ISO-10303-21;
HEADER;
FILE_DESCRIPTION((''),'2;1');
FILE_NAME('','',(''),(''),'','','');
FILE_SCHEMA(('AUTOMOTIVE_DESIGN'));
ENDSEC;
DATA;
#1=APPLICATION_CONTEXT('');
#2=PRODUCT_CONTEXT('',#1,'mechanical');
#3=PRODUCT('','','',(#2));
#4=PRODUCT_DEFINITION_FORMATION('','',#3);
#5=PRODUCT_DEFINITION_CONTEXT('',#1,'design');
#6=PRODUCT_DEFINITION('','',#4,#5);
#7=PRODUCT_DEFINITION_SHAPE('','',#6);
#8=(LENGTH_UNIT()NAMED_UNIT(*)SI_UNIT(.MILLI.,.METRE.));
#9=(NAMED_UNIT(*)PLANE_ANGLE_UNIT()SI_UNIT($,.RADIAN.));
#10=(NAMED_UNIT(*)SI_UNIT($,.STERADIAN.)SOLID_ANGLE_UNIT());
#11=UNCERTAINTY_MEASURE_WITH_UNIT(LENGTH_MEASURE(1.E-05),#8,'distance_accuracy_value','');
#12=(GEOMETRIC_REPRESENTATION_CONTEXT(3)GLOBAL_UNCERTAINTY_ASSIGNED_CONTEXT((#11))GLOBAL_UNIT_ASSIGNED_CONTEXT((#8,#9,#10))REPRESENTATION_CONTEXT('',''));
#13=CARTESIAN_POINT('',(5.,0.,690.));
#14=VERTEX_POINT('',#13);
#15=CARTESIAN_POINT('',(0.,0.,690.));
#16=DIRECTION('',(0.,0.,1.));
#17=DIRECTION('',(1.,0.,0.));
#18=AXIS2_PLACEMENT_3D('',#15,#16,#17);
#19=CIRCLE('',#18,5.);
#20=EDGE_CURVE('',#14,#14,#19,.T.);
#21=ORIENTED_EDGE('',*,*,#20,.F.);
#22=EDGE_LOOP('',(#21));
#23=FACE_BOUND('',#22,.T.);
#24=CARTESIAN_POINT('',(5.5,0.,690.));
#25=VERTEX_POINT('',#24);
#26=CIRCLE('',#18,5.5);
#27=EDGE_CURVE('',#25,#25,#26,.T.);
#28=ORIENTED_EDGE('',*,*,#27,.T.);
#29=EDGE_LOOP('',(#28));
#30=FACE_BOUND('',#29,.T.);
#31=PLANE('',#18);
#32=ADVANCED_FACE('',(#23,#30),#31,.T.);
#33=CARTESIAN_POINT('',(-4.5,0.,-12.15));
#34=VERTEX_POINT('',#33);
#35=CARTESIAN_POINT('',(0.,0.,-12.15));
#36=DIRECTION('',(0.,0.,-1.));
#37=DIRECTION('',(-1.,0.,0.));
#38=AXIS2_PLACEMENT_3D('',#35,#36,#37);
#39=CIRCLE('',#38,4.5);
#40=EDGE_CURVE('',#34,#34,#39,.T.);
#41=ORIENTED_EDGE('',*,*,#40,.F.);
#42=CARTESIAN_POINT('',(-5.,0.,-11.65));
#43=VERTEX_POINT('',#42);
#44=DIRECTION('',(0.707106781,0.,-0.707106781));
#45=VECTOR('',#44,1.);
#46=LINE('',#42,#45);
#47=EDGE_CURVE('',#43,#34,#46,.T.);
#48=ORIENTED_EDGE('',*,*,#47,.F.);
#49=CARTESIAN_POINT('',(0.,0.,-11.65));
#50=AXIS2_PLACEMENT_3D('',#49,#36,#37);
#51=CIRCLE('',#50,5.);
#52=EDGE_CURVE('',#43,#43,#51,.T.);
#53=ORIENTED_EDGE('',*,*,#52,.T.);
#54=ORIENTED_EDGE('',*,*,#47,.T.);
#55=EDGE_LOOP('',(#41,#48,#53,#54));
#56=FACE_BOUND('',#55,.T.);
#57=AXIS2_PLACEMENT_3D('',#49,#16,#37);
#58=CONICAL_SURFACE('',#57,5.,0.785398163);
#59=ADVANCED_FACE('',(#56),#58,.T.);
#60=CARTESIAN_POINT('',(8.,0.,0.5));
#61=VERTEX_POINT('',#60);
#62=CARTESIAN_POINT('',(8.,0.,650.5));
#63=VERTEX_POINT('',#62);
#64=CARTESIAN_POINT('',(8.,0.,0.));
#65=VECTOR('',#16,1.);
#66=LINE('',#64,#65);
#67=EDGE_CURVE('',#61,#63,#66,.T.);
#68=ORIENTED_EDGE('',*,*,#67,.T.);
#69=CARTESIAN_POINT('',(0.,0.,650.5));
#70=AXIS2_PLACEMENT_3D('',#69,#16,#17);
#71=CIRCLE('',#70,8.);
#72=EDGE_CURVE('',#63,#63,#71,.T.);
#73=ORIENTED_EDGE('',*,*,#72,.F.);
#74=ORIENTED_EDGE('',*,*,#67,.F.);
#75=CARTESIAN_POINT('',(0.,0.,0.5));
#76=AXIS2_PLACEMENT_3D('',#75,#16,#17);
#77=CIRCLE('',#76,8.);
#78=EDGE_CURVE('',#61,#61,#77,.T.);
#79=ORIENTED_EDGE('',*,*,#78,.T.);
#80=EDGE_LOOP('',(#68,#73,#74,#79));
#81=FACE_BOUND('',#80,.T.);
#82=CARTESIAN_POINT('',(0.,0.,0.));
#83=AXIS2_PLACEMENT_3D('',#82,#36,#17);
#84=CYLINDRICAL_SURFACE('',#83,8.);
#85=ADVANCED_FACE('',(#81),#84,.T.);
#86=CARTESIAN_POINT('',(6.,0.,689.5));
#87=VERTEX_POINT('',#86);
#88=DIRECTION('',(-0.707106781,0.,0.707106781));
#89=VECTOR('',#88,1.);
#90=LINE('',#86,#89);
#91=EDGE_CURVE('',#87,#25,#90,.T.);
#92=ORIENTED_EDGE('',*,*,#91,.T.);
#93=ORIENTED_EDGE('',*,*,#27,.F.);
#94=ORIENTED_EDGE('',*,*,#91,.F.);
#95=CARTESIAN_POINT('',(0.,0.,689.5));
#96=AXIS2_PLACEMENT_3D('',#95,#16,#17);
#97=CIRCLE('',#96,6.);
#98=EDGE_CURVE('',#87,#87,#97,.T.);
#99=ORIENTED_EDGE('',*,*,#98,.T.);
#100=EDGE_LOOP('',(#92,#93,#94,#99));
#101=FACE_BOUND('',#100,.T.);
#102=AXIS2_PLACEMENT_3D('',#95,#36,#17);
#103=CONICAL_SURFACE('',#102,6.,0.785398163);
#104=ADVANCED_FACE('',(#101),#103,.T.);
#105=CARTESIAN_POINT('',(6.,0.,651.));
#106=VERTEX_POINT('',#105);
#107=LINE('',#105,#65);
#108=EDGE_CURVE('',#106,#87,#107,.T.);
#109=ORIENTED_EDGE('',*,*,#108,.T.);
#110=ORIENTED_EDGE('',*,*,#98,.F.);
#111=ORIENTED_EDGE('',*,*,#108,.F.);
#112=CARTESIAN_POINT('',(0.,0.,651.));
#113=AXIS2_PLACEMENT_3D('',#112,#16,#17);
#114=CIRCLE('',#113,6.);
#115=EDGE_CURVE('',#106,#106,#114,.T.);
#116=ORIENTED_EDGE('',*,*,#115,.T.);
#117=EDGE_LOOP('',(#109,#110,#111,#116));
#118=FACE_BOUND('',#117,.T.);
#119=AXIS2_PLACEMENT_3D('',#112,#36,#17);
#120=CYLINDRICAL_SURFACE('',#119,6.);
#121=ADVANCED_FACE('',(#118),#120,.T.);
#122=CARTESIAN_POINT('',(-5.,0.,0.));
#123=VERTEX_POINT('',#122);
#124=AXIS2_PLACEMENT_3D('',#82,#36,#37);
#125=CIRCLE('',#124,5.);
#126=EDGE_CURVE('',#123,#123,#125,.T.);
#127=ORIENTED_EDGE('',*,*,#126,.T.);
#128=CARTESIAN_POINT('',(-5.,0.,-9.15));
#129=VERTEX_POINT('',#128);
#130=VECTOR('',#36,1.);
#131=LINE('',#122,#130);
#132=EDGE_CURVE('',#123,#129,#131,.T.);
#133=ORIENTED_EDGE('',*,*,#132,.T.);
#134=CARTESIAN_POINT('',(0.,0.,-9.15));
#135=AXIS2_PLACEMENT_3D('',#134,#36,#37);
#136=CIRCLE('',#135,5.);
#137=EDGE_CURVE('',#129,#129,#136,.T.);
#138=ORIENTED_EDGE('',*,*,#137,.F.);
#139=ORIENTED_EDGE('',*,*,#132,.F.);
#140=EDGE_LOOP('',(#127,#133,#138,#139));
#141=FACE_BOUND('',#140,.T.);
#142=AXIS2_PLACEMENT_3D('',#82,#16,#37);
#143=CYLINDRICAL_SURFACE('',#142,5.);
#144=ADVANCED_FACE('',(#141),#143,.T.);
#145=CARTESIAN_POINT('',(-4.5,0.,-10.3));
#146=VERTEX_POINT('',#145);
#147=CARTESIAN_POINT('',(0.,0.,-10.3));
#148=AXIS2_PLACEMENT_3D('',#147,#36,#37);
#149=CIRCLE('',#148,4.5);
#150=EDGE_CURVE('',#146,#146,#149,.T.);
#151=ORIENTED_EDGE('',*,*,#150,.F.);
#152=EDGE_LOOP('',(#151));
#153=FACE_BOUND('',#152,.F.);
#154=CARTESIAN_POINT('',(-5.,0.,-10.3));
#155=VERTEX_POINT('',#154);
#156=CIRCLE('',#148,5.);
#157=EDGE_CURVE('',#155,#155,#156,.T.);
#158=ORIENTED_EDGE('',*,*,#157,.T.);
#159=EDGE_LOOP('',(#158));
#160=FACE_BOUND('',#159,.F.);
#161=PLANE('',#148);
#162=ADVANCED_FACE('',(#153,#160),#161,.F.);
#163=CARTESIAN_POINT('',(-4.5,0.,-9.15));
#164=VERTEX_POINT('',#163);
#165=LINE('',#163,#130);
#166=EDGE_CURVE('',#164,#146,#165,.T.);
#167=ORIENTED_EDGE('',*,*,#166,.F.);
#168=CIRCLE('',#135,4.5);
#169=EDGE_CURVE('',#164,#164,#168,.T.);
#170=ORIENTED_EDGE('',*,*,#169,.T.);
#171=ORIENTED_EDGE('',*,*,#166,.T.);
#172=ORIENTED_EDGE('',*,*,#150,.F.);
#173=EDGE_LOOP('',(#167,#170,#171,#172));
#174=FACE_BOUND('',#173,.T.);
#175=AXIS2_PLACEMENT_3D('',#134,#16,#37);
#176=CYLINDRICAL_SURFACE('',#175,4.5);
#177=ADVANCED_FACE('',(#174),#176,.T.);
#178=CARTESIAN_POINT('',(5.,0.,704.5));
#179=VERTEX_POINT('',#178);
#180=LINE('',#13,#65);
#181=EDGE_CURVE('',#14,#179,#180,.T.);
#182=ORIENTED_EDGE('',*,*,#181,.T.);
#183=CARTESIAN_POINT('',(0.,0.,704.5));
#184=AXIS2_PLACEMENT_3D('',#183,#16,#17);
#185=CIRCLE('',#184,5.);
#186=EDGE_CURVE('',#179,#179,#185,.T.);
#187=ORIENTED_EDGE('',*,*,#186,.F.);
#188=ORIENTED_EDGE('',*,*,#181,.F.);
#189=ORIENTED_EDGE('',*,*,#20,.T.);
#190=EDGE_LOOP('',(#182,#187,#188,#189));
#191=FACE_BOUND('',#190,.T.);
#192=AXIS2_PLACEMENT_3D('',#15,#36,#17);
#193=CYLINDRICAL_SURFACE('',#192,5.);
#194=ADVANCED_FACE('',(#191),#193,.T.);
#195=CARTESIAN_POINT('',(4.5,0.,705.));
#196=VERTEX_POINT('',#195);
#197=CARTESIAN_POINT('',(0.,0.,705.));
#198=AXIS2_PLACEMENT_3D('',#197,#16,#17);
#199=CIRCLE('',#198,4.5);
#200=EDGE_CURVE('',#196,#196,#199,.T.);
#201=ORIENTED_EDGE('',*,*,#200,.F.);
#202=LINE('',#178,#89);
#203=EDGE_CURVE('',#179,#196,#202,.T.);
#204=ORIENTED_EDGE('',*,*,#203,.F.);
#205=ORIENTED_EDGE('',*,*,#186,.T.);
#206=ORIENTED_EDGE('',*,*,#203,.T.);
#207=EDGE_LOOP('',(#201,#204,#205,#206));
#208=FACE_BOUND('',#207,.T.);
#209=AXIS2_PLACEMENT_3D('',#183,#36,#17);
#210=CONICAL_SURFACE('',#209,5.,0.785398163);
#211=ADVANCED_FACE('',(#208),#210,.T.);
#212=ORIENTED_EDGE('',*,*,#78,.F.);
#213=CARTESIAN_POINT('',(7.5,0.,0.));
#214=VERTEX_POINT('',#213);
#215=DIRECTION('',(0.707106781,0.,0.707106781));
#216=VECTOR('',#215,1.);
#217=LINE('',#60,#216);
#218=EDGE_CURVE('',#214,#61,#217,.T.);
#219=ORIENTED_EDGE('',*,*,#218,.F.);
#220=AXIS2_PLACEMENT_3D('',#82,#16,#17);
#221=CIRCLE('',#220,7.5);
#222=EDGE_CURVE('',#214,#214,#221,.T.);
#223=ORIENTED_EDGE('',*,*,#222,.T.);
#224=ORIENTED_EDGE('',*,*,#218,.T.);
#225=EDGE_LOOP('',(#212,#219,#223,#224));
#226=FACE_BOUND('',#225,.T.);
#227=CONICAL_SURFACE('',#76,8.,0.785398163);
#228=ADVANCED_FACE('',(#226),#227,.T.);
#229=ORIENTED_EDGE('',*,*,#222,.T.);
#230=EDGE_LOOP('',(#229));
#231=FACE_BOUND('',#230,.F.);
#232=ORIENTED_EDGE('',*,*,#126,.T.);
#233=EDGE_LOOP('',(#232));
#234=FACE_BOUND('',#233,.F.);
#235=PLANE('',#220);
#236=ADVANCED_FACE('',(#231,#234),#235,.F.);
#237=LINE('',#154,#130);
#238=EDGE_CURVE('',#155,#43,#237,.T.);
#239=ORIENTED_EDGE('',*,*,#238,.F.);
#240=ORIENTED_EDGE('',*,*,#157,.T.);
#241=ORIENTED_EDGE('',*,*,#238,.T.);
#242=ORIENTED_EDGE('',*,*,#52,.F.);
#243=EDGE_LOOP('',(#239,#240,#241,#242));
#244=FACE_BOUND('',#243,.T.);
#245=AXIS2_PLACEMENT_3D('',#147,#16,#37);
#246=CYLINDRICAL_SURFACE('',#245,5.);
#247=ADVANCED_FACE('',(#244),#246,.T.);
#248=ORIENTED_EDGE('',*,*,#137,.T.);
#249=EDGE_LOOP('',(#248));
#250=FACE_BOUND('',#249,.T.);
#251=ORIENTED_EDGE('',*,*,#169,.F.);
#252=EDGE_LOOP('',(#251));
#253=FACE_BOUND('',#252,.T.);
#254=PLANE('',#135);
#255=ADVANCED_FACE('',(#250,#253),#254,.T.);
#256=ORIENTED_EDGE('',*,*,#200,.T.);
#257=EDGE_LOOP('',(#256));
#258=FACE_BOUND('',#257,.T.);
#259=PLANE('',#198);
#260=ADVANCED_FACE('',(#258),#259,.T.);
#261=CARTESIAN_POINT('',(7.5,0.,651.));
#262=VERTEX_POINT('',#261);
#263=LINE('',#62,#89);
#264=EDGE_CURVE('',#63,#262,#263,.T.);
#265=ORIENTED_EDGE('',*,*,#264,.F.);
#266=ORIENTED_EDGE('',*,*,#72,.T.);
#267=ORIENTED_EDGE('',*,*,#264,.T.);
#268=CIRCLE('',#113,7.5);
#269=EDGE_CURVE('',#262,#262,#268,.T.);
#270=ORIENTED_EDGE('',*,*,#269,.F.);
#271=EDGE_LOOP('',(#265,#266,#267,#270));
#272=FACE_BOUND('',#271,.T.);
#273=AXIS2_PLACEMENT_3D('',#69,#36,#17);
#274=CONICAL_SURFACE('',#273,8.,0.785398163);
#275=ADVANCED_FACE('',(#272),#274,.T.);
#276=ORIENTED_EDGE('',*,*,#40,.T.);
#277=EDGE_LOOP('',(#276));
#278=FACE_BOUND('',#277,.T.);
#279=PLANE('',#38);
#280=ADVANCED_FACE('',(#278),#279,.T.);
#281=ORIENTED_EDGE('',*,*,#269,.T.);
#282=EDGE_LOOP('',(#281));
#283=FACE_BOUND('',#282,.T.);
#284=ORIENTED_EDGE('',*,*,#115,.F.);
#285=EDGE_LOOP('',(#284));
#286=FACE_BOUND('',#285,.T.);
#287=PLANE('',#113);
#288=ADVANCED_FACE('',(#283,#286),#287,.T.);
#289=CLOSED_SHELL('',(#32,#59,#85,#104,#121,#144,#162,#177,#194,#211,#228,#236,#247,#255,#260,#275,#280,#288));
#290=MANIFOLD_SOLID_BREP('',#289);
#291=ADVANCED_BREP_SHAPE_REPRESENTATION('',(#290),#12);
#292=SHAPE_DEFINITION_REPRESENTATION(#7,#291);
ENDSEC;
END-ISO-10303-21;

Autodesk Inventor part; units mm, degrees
ref_plane "YZ Plane" through (0, 0, 0) normal (1, 0, 0) x (0, 1, 0)
ref_plane "XZ Plane" through (0, 0, 0) normal (0, 1, 0) x (-1, 0, 0)
ref_plane "XY Plane" through (0, 0, 0) normal (0, 0, 1) x (1, 0, 0)
sketch "Esboço1" plane through (0, 0, 0) normal (0, 0, 1) x (1, 0, 0)
  circle A0 centre (0, 0) radius 8
  dimension "d0" = 16
extrude "Extrusão1" add sketch "Esboço1" along normal blind 651
sketch "Esboço2" plane through (0, 0, 651) normal (0, 0, 1) x (1, 0, 0)
  circle A0 centre (0, 0) radius 6
  dimension "d3" = 12
extrude "Extrusão2" add sketch "Esboço2" along normal blind 39
sketch "Esboço3" plane through (0, 0, 690) normal (0, 0, 1) x (1, 0, 0)
  circle A0 centre (0, 0) radius 5
  dimension "d6" = 10
extrude "Extrusão3" add sketch "Esboço3" along normal blind 15
sketch "Esboço4" plane through (0, 0, 0) normal (0, 0, -1) x (-1, 0, 0)
  circle A0 centre (0, 0) radius 5
  dimension "d9" = 10
extrude "Extrusão4" add sketch "Esboço4" along normal blind 9.15
sketch "Esboço5" plane through (0, 0, -9.15) normal (0, 0, -1) x (-1, 0, 0)
  circle A0 centre (0, 0) radius 4.5
  dimension "d12" = 9
extrude "Extrusão5" add sketch "Esboço5" along normal blind 1.15
sketch "Esboço6" plane through (0, 0, -10.3) normal (0, 0, -1) x (-1, 0, 0)
  circle A0 centre (0, 0) radius 5
  dimension "d15" = 10
extrude "Extrusão6" add sketch "Esboço6" along normal blind 1.85
thread "Rosca1" size "M12x1.75" class "6g" standard "ANSI Metric M Profile" length 14
chamfer "Chanfro1" distance 0.5 angle 45 5 edges at (-5, 0, 705) (-6, 0, 690) (-8, 0, 651) (-8, 0, 0) (5, 0, -12.15)
properties part number "SFU16XX_X"
